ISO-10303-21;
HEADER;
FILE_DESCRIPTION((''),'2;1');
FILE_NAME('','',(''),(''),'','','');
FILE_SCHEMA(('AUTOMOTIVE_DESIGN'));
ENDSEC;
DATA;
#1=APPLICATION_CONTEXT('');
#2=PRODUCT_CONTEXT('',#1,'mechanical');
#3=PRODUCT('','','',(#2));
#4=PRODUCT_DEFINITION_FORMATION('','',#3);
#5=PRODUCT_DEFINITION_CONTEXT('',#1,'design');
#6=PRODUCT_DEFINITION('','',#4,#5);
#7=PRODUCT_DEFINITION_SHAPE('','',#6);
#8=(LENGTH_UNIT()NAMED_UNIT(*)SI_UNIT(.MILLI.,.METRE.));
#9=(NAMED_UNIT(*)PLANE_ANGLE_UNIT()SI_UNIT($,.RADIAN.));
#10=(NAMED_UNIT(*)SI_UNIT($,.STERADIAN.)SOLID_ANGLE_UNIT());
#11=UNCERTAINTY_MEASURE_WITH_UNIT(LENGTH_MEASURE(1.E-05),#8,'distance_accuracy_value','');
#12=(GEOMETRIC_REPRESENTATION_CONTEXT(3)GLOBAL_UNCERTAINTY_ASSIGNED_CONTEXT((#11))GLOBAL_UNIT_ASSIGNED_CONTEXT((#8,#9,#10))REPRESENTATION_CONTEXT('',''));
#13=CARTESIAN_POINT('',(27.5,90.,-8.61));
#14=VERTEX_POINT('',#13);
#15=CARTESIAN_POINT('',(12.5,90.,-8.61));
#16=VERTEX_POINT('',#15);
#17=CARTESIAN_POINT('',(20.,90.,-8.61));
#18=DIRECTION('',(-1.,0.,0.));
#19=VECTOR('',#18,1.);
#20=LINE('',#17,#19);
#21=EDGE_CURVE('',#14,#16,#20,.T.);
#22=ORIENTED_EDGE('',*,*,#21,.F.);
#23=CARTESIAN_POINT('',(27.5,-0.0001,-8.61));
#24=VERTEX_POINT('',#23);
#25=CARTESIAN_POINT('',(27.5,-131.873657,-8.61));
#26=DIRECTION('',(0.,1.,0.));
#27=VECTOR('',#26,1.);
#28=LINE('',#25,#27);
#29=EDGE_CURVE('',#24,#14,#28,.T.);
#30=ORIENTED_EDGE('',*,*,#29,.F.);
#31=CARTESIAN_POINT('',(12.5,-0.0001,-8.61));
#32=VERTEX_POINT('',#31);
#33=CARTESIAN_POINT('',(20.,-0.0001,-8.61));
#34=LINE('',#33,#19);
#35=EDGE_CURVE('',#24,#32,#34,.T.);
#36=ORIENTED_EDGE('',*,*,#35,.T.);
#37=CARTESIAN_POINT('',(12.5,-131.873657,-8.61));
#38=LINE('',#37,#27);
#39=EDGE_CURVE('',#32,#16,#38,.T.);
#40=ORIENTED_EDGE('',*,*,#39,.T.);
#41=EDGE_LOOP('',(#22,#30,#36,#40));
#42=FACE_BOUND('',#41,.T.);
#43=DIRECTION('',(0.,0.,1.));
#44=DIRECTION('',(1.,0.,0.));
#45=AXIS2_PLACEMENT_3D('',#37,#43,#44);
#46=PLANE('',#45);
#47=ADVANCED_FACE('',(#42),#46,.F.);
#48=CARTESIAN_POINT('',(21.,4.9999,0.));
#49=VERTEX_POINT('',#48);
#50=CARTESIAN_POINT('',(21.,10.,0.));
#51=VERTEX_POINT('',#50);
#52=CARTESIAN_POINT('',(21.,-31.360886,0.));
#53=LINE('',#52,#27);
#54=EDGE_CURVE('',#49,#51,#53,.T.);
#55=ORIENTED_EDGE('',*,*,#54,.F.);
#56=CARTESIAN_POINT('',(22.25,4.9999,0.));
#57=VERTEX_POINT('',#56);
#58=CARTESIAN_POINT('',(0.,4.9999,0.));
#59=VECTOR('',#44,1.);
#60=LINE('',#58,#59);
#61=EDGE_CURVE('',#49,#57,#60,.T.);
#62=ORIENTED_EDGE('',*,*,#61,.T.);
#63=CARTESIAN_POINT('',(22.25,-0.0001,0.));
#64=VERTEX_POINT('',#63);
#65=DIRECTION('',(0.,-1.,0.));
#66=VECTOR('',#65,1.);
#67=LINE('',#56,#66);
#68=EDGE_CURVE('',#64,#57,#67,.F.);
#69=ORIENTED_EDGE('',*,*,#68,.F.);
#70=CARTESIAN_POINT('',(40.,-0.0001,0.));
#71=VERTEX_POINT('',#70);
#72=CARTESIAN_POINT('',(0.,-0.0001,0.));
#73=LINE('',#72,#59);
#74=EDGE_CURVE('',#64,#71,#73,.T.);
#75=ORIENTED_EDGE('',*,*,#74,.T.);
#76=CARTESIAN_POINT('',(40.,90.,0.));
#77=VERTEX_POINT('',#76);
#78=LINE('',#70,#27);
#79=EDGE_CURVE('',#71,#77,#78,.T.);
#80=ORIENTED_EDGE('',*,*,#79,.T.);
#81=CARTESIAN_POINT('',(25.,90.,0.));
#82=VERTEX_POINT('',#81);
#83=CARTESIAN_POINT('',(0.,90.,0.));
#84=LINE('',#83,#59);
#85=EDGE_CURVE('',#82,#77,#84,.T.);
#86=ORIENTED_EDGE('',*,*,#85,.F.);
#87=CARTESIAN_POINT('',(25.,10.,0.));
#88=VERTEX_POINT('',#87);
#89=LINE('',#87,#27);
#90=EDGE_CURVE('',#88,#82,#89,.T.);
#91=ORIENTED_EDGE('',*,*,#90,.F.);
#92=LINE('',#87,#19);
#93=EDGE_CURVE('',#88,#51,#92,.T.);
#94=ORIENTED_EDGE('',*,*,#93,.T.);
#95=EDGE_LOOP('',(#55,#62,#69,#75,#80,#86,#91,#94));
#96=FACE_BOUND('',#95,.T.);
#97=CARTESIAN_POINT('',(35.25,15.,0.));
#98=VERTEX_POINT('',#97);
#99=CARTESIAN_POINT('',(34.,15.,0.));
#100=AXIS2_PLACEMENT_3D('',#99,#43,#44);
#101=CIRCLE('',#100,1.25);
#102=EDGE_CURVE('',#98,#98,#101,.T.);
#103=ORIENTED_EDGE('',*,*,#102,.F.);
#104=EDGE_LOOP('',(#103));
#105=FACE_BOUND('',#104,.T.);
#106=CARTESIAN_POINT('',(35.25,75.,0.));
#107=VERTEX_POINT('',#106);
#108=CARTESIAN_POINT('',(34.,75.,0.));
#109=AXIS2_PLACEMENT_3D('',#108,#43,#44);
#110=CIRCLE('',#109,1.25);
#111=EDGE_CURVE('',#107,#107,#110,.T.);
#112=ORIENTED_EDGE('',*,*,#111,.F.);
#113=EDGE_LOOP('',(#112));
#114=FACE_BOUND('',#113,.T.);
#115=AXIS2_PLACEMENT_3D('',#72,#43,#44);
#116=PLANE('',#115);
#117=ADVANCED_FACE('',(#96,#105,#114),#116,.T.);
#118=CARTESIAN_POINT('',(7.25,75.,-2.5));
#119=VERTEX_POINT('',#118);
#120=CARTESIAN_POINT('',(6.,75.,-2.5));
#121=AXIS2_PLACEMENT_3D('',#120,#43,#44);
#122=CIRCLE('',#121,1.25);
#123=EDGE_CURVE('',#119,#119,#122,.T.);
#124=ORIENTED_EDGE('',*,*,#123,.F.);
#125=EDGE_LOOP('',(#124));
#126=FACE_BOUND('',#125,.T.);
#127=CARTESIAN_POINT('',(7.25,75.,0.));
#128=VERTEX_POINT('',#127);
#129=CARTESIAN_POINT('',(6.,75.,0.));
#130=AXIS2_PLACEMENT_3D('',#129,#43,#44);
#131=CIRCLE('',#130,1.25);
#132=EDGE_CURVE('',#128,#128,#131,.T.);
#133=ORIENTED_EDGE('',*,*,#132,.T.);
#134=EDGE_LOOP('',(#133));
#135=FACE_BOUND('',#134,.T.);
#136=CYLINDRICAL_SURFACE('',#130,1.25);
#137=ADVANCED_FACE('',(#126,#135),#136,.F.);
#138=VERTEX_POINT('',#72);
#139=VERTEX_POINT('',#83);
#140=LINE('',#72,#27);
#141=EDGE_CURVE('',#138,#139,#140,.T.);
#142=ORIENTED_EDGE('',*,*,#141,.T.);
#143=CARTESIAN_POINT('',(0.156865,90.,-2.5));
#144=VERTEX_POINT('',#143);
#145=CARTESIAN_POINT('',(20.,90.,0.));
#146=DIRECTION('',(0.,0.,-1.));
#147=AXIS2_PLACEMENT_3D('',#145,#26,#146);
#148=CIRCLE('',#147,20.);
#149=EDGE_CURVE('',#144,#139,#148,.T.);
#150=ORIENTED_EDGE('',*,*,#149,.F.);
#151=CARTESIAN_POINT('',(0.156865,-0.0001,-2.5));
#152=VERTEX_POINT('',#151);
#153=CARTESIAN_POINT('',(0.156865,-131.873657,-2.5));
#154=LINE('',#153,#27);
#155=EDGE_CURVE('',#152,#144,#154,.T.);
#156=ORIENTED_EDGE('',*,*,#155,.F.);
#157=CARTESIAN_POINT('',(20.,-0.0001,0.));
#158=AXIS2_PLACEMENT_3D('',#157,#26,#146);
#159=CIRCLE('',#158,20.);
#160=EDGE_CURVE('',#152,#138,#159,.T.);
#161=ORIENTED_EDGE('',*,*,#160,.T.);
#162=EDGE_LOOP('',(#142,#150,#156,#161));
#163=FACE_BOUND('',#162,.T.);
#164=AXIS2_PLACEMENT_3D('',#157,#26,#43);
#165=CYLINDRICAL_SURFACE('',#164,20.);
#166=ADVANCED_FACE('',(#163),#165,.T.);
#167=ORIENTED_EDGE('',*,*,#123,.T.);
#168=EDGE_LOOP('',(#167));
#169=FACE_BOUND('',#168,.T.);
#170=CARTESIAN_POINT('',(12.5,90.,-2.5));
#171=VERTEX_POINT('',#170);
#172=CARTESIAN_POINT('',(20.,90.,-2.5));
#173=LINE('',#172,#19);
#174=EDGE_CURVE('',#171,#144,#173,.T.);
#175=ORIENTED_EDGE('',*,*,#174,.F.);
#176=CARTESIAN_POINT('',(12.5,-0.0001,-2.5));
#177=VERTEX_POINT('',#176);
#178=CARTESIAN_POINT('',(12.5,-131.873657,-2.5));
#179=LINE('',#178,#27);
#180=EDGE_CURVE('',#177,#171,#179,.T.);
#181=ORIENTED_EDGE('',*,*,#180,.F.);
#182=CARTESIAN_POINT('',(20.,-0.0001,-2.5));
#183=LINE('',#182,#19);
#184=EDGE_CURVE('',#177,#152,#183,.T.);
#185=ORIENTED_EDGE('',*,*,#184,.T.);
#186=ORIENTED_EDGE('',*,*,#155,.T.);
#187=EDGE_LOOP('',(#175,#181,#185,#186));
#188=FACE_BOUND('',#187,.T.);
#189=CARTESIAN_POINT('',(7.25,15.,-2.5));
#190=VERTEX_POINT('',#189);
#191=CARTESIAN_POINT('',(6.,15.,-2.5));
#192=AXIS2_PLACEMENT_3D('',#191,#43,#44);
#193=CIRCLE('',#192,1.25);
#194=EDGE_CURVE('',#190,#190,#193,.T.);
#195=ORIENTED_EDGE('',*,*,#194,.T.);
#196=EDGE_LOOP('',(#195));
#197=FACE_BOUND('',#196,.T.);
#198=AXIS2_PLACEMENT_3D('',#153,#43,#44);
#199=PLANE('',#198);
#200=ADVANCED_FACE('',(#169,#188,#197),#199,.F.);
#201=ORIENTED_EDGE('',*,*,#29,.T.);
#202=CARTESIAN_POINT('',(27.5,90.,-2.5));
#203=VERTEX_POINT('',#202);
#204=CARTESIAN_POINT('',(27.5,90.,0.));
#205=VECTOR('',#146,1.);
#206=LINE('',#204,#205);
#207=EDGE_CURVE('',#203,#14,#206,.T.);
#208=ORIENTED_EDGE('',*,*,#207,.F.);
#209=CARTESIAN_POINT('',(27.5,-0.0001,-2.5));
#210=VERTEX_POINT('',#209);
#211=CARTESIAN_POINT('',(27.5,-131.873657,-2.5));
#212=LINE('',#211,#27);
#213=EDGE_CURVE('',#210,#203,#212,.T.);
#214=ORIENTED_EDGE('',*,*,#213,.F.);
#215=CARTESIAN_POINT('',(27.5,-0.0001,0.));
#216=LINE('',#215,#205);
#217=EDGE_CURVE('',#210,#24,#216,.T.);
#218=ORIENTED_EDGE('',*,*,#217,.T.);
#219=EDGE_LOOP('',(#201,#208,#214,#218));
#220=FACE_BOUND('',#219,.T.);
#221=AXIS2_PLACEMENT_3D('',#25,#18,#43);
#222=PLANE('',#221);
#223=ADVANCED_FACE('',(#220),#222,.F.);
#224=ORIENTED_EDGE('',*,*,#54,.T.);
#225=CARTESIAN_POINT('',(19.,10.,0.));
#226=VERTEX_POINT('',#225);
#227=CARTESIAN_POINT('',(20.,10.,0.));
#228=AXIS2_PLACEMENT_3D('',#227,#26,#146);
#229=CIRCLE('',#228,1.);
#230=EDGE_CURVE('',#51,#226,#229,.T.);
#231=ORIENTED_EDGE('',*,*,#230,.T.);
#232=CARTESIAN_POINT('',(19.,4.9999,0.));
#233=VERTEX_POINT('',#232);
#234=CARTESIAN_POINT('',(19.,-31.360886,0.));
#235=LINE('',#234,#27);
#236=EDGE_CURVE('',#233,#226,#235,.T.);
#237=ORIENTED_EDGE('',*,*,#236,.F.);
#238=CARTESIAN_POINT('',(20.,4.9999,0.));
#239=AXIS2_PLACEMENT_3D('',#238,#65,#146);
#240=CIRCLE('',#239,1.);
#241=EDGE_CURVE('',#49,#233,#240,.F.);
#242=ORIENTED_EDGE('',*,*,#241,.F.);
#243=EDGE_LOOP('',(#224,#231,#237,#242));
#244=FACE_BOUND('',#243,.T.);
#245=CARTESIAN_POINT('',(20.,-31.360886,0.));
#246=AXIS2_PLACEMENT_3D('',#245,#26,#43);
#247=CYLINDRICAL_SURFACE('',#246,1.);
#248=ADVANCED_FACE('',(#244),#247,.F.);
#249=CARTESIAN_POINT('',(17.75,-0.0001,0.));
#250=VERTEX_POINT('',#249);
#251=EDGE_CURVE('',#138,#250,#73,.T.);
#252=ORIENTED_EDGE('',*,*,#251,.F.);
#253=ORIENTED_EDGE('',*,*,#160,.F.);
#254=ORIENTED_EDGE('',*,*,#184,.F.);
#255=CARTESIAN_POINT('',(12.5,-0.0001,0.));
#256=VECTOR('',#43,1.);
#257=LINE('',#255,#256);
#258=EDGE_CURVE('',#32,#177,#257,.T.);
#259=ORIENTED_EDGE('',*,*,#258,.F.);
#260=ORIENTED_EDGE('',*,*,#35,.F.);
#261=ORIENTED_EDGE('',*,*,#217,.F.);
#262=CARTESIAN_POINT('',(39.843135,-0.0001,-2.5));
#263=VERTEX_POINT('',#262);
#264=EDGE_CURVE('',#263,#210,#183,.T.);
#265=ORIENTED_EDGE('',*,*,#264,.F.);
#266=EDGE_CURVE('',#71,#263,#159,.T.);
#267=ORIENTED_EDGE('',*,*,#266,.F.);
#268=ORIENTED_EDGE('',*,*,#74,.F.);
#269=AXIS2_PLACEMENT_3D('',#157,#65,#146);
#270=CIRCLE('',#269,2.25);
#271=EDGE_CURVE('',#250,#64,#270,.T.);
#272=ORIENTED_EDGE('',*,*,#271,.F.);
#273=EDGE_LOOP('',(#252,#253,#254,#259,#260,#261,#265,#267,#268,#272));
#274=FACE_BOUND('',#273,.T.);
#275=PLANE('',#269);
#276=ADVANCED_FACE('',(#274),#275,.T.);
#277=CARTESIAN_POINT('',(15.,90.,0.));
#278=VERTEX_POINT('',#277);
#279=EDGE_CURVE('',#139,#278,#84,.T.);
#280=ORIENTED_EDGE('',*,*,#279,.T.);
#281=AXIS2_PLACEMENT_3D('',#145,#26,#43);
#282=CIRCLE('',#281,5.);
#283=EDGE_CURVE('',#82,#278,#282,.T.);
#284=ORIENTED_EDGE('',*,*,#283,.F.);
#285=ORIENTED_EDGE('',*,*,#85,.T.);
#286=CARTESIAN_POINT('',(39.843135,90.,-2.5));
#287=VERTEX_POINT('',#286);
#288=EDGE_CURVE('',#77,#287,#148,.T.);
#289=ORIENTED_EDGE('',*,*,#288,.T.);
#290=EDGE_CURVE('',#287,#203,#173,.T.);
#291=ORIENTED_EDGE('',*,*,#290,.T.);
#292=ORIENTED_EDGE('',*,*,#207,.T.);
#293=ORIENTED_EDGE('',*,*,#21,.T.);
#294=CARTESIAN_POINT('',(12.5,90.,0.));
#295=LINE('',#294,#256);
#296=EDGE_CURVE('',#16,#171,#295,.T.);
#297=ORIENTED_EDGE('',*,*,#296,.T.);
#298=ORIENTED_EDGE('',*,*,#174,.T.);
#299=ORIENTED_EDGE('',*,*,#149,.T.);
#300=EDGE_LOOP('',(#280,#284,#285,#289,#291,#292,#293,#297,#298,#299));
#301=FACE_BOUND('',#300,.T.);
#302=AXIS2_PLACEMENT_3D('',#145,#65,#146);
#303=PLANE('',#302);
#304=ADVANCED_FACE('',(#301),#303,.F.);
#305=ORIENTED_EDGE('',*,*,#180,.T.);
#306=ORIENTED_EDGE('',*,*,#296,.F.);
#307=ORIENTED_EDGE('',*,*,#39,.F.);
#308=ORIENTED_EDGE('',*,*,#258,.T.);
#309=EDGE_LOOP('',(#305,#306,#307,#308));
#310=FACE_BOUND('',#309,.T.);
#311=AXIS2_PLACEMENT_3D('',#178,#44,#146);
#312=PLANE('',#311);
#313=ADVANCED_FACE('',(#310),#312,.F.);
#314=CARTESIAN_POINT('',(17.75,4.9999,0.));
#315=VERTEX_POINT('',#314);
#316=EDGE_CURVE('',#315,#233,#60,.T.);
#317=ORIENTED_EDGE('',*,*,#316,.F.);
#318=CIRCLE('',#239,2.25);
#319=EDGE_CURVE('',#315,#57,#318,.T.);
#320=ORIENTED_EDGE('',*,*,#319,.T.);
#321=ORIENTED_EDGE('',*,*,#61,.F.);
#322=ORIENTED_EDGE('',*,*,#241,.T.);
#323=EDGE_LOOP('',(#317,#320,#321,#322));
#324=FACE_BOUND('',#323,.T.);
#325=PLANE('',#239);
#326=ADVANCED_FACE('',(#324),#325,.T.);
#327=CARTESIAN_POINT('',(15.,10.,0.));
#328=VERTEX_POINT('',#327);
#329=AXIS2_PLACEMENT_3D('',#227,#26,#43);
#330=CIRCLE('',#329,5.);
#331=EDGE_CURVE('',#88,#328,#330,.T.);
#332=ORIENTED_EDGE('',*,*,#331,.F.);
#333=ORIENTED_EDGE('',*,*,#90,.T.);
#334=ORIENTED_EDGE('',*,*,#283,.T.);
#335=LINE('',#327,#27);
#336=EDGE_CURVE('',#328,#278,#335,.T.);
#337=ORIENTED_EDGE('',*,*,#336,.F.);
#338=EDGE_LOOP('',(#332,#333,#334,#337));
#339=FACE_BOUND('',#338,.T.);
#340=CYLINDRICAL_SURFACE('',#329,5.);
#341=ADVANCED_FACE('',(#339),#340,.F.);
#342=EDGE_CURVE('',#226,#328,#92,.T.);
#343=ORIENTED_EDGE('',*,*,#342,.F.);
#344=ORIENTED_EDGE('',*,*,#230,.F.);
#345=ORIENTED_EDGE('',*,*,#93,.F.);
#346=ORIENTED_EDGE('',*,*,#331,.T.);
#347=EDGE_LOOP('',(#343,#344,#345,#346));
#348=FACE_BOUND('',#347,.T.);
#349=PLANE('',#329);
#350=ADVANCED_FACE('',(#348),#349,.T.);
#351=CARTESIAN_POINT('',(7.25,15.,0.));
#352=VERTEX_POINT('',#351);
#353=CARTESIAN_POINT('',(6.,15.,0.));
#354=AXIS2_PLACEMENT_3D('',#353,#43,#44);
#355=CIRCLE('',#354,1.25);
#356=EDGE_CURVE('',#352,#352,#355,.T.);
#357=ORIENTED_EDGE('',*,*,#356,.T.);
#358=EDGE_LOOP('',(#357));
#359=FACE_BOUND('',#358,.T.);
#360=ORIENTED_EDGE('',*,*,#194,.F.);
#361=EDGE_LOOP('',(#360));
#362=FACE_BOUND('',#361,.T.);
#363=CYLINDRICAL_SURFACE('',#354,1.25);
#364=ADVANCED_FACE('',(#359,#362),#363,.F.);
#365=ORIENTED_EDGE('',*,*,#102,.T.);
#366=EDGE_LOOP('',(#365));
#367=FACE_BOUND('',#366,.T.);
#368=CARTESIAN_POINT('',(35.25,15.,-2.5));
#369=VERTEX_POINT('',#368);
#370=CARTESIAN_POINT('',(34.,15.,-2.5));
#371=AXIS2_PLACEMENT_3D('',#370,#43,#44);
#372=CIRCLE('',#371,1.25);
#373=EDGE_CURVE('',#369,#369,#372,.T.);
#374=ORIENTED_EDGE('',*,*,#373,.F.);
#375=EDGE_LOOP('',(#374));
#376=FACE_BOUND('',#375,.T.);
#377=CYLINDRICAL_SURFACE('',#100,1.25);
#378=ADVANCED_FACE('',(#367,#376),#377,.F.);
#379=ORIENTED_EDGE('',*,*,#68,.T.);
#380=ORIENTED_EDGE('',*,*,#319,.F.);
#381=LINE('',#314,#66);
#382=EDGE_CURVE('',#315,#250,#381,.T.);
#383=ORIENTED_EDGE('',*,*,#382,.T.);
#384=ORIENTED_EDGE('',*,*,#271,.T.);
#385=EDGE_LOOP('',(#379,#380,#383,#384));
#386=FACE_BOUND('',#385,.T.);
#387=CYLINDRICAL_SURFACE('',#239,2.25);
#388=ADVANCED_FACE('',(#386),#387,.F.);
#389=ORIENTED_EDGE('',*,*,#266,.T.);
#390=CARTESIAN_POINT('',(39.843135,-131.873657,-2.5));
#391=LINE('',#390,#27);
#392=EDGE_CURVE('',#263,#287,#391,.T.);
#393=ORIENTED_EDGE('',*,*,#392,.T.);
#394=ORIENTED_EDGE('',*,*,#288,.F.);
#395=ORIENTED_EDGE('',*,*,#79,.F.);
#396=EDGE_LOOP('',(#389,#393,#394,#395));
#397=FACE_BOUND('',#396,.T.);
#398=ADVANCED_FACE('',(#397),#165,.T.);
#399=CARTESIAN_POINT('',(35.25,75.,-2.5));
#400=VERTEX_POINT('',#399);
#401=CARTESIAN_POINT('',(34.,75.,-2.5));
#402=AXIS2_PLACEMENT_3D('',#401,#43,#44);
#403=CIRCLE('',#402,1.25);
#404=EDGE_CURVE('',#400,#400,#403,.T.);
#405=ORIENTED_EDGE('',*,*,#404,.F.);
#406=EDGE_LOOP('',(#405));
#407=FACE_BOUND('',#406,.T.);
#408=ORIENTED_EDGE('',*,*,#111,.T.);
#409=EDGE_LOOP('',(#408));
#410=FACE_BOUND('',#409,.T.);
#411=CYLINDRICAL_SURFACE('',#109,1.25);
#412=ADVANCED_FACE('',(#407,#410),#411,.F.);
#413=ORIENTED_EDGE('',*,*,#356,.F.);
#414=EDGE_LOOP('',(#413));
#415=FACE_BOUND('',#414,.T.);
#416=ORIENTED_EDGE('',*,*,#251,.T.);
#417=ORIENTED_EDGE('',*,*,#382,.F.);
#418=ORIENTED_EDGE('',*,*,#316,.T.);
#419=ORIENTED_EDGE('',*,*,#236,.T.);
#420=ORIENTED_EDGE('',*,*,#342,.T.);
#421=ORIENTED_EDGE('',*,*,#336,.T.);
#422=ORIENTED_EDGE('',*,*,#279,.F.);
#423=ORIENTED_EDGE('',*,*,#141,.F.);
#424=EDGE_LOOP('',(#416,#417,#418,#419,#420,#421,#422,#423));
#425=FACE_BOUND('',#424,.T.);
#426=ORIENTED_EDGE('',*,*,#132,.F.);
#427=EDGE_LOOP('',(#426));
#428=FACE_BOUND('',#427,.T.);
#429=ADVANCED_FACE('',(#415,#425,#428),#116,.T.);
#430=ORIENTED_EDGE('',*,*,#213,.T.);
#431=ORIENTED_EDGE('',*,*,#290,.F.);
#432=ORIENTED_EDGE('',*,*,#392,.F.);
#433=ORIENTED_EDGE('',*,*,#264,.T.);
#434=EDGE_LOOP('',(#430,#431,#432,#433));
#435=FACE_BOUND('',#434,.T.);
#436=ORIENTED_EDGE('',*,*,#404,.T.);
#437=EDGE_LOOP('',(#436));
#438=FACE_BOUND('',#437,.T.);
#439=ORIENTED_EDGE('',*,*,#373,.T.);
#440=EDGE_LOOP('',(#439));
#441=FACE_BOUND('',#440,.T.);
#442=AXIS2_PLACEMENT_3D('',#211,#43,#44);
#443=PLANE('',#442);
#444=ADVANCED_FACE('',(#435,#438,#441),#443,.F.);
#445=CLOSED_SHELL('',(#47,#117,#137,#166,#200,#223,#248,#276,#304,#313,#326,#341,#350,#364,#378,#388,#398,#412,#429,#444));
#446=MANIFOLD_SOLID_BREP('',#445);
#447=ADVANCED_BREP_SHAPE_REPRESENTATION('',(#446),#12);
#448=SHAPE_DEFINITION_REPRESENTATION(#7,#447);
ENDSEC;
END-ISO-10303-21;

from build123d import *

# Parameters (mm, degrees)
AUFSATZ_LINEAR_AUSTRAGEN1_DEPTH       = 90
AUFSATZ_LINEAR_AUSTRAGEN1_DEPTH_BACK  = 0.0001
SCHNITT_LINEAR_AUSTRAGEN1_DEPTH       = 80
AUFSATZ_LINEAR_START                  = -10.0001
AUFSATZ_LINEAR_AUSTRAGEN2_DEPTH       = 10.0001
SKIZZE45_R                            = 2.25
SCHNITT_LINEAR_AUSTRAGEN9_DEPTH       = 5
SCHNITT_LINEAR_AUSTRAGEN16_DEPTH      = 101.498845765
SCHNITT_LINEAR_AUSTRAGEN16_DEPTH_BACK = 101.498845765
F_2_5_2_5_DURCHMESSER_BOHRUNG1_D      = 2.5


# Read off the part's stored shape, not the designer's step: Aufsatz-Linear austragen2
with BuildPart() as part:
    # Skizze1 → Aufsatz-Linear austragen1 (new, two sides: drawn at the far end of the back side and taken through both)
    with BuildSketch(Plane(origin=(0, 0, 0), x_dir=(1, 0, 0), z_dir=(0, 1, 0)).offset(-AUFSATZ_LINEAR_AUSTRAGEN1_DEPTH_BACK)):
        with BuildLine():
            Line((0, 0), (40, 0))
            ThreePointArc((40, 0), (20, 20), (0, 0))
        make_face()
    extrude(amount=AUFSATZ_LINEAR_AUSTRAGEN1_DEPTH + AUFSATZ_LINEAR_AUSTRAGEN1_DEPTH_BACK)

    # Skizze15 → Schnitt-Linear austragen1 (cut)
    with BuildSketch(Plane(origin=(0, 90, 0), x_dir=(1, 0, 0), z_dir=(0, 1, 0))):
        with BuildLine():
            Line((25, 0), (15, 0))
            ThreePointArc((15, 0), (20, 5), (25, 0))
        make_face()
    extrude(amount=-SCHNITT_LINEAR_AUSTRAGEN1_DEPTH, mode=Mode.SUBTRACT)

    # Aufsatz-Linear austragen2 outline → Aufsatz-Linear austragen2 (cut)
    with BuildSketch(Plane(origin=(0, 10, 0), x_dir=(1, 0, 0), z_dir=(0, 1, 0)).offset(AUFSATZ_LINEAR_START)):
        with BuildLine():
            Line((19, 0), (21, 0))
            ThreePointArc((21, 0), (20, 1), (19, 0))
        make_face()
    extrude(amount=AUFSATZ_LINEAR_AUSTRAGEN2_DEPTH, mode=Mode.SUBTRACT)

    # Skizze45 → Schnitt-Linear austragen9 (cut)
    with BuildSketch(Plane.XZ.offset(0.0001)):
        with Locations((20, 0)):
            Circle(SKIZZE45_R)
    extrude(amount=-SCHNITT_LINEAR_AUSTRAGEN9_DEPTH, mode=Mode.SUBTRACT)

    # Skizze47 → Schnitt-Linear austragen16 (cut, two sides: drawn at the far end of the back side and taken through both)
    with BuildSketch(Plane.XZ.offset(0.0001).offset(-SCHNITT_LINEAR_AUSTRAGEN16_DEPTH_BACK)):
        Polygon((-96.877045312, -2.5), (0.156865167, -2.5), (12.5, -2.5), (12.5, -8.61), (27.5, -8.61), (27.5, -2.5), (39.843134833, -2.5), (136.877045312, -2.5), (136.877045312, -196.567820958), (-96.877045312, -196.567820958), align=None)
    extrude(amount=SCHNITT_LINEAR_AUSTRAGEN16_DEPTH + SCHNITT_LINEAR_AUSTRAGEN16_DEPTH_BACK, mode=Mode.SUBTRACT)

    # Ø2.5 (2.5) Durchmesser Bohrung1 (through all)
    with Locations(Plane.XY):
        with Locations((6, 75), (6, 15), (34, 75), (34, 15)):
            Hole(F_2_5_2_5_DURCHMESSER_BOHRUNG1_D / 2)


solid = part.part
